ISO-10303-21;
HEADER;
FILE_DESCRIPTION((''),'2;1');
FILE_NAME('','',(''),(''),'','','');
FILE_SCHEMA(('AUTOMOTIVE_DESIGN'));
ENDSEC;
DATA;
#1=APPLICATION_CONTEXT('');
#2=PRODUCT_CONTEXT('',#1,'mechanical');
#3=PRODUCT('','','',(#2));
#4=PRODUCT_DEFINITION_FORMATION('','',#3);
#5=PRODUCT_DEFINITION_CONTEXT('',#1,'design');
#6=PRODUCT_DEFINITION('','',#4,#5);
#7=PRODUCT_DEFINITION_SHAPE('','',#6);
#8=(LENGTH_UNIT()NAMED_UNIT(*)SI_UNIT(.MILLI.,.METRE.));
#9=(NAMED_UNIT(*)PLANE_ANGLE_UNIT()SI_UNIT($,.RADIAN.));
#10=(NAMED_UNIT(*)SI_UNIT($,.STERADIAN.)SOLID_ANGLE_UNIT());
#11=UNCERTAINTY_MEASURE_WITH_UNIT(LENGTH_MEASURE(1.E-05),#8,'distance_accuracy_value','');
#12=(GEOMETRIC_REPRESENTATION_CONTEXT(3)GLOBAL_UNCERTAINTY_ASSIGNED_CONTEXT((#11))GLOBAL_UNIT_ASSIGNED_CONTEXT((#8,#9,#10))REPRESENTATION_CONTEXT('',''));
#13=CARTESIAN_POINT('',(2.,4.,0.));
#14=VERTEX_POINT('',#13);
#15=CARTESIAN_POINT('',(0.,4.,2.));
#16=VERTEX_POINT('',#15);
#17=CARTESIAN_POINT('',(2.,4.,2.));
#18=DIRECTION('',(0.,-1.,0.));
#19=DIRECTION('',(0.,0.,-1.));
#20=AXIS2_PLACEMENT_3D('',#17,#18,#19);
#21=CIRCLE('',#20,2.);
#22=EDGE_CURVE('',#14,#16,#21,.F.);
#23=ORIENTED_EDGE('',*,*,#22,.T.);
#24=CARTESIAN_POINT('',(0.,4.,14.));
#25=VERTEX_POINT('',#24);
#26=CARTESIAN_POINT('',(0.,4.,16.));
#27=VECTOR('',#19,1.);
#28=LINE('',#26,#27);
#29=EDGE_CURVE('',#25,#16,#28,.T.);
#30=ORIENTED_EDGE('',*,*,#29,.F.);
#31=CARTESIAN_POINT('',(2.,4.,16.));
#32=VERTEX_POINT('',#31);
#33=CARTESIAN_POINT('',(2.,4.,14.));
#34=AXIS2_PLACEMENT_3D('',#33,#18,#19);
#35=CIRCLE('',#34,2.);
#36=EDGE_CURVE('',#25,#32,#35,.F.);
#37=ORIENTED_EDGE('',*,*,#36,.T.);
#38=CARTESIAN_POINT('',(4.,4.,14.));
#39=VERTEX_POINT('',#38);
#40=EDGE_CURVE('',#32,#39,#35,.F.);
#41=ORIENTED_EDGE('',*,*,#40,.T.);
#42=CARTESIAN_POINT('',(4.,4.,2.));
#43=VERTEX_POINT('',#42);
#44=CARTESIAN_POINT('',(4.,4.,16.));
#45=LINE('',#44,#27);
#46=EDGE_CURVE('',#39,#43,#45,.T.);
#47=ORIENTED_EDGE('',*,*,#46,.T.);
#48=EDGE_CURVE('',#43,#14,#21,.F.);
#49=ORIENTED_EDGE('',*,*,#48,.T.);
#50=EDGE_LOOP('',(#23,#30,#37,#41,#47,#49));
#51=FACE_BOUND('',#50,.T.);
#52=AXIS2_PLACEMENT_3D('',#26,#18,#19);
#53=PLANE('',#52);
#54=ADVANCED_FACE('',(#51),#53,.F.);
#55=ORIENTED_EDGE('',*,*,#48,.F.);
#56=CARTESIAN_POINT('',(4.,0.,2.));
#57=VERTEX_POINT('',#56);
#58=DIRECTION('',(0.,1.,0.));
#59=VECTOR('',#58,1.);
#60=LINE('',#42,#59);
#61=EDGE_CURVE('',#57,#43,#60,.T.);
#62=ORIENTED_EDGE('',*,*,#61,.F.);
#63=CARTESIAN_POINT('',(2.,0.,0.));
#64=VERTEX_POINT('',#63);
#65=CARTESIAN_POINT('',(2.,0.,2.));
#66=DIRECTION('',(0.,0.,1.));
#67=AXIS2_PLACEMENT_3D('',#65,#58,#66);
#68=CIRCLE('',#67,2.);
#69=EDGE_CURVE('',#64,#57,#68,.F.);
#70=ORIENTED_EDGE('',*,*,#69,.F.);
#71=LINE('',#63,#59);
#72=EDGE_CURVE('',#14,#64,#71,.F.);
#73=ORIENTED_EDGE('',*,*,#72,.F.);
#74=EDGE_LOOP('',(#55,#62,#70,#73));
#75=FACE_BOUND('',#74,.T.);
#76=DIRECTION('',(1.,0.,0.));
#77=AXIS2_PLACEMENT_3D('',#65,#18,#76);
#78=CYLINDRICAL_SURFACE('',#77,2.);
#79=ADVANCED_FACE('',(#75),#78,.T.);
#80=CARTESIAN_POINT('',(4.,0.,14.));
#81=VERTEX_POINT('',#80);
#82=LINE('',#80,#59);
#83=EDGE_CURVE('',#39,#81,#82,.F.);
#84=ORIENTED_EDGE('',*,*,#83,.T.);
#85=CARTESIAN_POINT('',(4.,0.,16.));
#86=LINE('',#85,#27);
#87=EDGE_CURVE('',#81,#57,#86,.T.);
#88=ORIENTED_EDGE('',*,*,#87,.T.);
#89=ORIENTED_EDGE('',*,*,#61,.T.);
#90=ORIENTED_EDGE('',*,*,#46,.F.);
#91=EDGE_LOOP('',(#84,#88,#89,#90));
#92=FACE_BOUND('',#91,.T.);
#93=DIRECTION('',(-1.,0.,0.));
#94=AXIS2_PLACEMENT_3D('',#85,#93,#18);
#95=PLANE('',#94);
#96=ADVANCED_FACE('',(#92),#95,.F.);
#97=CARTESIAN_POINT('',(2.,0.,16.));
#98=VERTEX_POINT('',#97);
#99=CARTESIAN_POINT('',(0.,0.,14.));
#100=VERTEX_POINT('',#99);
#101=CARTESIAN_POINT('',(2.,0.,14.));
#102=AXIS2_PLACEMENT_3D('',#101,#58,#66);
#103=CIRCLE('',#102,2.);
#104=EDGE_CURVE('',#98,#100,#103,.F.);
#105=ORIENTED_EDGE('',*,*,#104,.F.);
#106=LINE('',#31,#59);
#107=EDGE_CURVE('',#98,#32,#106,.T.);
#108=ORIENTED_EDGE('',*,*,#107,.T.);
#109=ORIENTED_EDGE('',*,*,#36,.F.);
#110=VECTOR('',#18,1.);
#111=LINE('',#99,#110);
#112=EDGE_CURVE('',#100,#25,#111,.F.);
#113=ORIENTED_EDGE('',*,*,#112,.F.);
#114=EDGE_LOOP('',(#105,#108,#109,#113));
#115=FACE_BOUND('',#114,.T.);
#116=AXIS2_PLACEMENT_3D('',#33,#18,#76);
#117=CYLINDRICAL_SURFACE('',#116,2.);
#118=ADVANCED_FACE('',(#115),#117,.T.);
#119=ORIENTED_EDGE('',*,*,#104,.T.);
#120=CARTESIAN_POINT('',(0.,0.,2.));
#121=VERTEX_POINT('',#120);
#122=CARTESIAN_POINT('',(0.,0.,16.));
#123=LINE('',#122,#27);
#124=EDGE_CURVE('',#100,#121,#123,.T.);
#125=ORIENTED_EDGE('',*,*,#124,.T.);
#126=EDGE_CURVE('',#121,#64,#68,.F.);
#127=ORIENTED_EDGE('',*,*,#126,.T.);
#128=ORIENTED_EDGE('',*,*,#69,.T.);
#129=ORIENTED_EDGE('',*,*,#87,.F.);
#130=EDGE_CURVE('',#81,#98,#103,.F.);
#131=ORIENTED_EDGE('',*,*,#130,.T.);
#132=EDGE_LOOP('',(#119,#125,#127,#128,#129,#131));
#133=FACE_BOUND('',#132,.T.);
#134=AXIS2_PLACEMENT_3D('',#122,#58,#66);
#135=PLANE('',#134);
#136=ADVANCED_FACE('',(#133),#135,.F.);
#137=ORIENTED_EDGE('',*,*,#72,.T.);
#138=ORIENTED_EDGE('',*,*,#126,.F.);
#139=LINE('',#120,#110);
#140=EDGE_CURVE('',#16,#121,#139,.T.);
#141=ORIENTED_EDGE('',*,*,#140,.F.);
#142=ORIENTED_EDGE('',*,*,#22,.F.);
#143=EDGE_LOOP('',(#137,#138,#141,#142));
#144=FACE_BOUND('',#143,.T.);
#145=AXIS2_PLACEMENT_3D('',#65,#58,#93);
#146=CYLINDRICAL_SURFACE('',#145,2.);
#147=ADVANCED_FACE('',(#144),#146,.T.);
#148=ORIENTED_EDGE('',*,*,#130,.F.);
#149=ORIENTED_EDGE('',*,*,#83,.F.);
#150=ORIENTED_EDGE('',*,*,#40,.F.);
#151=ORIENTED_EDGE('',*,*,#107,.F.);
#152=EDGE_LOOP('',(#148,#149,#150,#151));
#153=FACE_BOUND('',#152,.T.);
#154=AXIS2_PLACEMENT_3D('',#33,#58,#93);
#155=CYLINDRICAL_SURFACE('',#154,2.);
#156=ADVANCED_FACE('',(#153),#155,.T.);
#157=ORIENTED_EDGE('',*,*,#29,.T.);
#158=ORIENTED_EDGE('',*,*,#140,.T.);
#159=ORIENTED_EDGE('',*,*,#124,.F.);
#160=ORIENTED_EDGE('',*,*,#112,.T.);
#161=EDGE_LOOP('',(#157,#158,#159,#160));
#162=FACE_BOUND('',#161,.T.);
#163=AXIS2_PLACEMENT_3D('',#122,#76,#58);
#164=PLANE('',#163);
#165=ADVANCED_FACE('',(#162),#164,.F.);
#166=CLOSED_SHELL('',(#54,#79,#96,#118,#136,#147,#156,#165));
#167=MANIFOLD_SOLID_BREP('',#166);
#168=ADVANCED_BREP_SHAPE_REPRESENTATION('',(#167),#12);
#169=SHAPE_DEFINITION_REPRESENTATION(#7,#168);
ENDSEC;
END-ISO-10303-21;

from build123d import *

# Parameters (mm, degrees)
SKETCH1_W          = 4
SKETCH1_H          = 4
KEYEXTRUSION_DEPTH = 16
ENDRADII_R         = 2


with BuildPart() as part:
    # Sketch1 → KeyExtrusion (new body)
    with BuildSketch(Plane.XY):
        with Locations((2, 2)):
            Rectangle(SKETCH1_W, SKETCH1_H)
    extrude(amount=KEYEXTRUSION_DEPTH)

    # EndRadii
    endradii_edges = [part.edges().sort_by_distance(p)[0] for p in [
        (0, 2, 0),
        (4, 2, 0),
        (0, 2, 16),
        (4, 2, 16),
    ]]
    fillet(endradii_edges, radius=ENDRADII_R - 0.0001)  # a hair under: the kernel refuses the full size


solid = part.part
